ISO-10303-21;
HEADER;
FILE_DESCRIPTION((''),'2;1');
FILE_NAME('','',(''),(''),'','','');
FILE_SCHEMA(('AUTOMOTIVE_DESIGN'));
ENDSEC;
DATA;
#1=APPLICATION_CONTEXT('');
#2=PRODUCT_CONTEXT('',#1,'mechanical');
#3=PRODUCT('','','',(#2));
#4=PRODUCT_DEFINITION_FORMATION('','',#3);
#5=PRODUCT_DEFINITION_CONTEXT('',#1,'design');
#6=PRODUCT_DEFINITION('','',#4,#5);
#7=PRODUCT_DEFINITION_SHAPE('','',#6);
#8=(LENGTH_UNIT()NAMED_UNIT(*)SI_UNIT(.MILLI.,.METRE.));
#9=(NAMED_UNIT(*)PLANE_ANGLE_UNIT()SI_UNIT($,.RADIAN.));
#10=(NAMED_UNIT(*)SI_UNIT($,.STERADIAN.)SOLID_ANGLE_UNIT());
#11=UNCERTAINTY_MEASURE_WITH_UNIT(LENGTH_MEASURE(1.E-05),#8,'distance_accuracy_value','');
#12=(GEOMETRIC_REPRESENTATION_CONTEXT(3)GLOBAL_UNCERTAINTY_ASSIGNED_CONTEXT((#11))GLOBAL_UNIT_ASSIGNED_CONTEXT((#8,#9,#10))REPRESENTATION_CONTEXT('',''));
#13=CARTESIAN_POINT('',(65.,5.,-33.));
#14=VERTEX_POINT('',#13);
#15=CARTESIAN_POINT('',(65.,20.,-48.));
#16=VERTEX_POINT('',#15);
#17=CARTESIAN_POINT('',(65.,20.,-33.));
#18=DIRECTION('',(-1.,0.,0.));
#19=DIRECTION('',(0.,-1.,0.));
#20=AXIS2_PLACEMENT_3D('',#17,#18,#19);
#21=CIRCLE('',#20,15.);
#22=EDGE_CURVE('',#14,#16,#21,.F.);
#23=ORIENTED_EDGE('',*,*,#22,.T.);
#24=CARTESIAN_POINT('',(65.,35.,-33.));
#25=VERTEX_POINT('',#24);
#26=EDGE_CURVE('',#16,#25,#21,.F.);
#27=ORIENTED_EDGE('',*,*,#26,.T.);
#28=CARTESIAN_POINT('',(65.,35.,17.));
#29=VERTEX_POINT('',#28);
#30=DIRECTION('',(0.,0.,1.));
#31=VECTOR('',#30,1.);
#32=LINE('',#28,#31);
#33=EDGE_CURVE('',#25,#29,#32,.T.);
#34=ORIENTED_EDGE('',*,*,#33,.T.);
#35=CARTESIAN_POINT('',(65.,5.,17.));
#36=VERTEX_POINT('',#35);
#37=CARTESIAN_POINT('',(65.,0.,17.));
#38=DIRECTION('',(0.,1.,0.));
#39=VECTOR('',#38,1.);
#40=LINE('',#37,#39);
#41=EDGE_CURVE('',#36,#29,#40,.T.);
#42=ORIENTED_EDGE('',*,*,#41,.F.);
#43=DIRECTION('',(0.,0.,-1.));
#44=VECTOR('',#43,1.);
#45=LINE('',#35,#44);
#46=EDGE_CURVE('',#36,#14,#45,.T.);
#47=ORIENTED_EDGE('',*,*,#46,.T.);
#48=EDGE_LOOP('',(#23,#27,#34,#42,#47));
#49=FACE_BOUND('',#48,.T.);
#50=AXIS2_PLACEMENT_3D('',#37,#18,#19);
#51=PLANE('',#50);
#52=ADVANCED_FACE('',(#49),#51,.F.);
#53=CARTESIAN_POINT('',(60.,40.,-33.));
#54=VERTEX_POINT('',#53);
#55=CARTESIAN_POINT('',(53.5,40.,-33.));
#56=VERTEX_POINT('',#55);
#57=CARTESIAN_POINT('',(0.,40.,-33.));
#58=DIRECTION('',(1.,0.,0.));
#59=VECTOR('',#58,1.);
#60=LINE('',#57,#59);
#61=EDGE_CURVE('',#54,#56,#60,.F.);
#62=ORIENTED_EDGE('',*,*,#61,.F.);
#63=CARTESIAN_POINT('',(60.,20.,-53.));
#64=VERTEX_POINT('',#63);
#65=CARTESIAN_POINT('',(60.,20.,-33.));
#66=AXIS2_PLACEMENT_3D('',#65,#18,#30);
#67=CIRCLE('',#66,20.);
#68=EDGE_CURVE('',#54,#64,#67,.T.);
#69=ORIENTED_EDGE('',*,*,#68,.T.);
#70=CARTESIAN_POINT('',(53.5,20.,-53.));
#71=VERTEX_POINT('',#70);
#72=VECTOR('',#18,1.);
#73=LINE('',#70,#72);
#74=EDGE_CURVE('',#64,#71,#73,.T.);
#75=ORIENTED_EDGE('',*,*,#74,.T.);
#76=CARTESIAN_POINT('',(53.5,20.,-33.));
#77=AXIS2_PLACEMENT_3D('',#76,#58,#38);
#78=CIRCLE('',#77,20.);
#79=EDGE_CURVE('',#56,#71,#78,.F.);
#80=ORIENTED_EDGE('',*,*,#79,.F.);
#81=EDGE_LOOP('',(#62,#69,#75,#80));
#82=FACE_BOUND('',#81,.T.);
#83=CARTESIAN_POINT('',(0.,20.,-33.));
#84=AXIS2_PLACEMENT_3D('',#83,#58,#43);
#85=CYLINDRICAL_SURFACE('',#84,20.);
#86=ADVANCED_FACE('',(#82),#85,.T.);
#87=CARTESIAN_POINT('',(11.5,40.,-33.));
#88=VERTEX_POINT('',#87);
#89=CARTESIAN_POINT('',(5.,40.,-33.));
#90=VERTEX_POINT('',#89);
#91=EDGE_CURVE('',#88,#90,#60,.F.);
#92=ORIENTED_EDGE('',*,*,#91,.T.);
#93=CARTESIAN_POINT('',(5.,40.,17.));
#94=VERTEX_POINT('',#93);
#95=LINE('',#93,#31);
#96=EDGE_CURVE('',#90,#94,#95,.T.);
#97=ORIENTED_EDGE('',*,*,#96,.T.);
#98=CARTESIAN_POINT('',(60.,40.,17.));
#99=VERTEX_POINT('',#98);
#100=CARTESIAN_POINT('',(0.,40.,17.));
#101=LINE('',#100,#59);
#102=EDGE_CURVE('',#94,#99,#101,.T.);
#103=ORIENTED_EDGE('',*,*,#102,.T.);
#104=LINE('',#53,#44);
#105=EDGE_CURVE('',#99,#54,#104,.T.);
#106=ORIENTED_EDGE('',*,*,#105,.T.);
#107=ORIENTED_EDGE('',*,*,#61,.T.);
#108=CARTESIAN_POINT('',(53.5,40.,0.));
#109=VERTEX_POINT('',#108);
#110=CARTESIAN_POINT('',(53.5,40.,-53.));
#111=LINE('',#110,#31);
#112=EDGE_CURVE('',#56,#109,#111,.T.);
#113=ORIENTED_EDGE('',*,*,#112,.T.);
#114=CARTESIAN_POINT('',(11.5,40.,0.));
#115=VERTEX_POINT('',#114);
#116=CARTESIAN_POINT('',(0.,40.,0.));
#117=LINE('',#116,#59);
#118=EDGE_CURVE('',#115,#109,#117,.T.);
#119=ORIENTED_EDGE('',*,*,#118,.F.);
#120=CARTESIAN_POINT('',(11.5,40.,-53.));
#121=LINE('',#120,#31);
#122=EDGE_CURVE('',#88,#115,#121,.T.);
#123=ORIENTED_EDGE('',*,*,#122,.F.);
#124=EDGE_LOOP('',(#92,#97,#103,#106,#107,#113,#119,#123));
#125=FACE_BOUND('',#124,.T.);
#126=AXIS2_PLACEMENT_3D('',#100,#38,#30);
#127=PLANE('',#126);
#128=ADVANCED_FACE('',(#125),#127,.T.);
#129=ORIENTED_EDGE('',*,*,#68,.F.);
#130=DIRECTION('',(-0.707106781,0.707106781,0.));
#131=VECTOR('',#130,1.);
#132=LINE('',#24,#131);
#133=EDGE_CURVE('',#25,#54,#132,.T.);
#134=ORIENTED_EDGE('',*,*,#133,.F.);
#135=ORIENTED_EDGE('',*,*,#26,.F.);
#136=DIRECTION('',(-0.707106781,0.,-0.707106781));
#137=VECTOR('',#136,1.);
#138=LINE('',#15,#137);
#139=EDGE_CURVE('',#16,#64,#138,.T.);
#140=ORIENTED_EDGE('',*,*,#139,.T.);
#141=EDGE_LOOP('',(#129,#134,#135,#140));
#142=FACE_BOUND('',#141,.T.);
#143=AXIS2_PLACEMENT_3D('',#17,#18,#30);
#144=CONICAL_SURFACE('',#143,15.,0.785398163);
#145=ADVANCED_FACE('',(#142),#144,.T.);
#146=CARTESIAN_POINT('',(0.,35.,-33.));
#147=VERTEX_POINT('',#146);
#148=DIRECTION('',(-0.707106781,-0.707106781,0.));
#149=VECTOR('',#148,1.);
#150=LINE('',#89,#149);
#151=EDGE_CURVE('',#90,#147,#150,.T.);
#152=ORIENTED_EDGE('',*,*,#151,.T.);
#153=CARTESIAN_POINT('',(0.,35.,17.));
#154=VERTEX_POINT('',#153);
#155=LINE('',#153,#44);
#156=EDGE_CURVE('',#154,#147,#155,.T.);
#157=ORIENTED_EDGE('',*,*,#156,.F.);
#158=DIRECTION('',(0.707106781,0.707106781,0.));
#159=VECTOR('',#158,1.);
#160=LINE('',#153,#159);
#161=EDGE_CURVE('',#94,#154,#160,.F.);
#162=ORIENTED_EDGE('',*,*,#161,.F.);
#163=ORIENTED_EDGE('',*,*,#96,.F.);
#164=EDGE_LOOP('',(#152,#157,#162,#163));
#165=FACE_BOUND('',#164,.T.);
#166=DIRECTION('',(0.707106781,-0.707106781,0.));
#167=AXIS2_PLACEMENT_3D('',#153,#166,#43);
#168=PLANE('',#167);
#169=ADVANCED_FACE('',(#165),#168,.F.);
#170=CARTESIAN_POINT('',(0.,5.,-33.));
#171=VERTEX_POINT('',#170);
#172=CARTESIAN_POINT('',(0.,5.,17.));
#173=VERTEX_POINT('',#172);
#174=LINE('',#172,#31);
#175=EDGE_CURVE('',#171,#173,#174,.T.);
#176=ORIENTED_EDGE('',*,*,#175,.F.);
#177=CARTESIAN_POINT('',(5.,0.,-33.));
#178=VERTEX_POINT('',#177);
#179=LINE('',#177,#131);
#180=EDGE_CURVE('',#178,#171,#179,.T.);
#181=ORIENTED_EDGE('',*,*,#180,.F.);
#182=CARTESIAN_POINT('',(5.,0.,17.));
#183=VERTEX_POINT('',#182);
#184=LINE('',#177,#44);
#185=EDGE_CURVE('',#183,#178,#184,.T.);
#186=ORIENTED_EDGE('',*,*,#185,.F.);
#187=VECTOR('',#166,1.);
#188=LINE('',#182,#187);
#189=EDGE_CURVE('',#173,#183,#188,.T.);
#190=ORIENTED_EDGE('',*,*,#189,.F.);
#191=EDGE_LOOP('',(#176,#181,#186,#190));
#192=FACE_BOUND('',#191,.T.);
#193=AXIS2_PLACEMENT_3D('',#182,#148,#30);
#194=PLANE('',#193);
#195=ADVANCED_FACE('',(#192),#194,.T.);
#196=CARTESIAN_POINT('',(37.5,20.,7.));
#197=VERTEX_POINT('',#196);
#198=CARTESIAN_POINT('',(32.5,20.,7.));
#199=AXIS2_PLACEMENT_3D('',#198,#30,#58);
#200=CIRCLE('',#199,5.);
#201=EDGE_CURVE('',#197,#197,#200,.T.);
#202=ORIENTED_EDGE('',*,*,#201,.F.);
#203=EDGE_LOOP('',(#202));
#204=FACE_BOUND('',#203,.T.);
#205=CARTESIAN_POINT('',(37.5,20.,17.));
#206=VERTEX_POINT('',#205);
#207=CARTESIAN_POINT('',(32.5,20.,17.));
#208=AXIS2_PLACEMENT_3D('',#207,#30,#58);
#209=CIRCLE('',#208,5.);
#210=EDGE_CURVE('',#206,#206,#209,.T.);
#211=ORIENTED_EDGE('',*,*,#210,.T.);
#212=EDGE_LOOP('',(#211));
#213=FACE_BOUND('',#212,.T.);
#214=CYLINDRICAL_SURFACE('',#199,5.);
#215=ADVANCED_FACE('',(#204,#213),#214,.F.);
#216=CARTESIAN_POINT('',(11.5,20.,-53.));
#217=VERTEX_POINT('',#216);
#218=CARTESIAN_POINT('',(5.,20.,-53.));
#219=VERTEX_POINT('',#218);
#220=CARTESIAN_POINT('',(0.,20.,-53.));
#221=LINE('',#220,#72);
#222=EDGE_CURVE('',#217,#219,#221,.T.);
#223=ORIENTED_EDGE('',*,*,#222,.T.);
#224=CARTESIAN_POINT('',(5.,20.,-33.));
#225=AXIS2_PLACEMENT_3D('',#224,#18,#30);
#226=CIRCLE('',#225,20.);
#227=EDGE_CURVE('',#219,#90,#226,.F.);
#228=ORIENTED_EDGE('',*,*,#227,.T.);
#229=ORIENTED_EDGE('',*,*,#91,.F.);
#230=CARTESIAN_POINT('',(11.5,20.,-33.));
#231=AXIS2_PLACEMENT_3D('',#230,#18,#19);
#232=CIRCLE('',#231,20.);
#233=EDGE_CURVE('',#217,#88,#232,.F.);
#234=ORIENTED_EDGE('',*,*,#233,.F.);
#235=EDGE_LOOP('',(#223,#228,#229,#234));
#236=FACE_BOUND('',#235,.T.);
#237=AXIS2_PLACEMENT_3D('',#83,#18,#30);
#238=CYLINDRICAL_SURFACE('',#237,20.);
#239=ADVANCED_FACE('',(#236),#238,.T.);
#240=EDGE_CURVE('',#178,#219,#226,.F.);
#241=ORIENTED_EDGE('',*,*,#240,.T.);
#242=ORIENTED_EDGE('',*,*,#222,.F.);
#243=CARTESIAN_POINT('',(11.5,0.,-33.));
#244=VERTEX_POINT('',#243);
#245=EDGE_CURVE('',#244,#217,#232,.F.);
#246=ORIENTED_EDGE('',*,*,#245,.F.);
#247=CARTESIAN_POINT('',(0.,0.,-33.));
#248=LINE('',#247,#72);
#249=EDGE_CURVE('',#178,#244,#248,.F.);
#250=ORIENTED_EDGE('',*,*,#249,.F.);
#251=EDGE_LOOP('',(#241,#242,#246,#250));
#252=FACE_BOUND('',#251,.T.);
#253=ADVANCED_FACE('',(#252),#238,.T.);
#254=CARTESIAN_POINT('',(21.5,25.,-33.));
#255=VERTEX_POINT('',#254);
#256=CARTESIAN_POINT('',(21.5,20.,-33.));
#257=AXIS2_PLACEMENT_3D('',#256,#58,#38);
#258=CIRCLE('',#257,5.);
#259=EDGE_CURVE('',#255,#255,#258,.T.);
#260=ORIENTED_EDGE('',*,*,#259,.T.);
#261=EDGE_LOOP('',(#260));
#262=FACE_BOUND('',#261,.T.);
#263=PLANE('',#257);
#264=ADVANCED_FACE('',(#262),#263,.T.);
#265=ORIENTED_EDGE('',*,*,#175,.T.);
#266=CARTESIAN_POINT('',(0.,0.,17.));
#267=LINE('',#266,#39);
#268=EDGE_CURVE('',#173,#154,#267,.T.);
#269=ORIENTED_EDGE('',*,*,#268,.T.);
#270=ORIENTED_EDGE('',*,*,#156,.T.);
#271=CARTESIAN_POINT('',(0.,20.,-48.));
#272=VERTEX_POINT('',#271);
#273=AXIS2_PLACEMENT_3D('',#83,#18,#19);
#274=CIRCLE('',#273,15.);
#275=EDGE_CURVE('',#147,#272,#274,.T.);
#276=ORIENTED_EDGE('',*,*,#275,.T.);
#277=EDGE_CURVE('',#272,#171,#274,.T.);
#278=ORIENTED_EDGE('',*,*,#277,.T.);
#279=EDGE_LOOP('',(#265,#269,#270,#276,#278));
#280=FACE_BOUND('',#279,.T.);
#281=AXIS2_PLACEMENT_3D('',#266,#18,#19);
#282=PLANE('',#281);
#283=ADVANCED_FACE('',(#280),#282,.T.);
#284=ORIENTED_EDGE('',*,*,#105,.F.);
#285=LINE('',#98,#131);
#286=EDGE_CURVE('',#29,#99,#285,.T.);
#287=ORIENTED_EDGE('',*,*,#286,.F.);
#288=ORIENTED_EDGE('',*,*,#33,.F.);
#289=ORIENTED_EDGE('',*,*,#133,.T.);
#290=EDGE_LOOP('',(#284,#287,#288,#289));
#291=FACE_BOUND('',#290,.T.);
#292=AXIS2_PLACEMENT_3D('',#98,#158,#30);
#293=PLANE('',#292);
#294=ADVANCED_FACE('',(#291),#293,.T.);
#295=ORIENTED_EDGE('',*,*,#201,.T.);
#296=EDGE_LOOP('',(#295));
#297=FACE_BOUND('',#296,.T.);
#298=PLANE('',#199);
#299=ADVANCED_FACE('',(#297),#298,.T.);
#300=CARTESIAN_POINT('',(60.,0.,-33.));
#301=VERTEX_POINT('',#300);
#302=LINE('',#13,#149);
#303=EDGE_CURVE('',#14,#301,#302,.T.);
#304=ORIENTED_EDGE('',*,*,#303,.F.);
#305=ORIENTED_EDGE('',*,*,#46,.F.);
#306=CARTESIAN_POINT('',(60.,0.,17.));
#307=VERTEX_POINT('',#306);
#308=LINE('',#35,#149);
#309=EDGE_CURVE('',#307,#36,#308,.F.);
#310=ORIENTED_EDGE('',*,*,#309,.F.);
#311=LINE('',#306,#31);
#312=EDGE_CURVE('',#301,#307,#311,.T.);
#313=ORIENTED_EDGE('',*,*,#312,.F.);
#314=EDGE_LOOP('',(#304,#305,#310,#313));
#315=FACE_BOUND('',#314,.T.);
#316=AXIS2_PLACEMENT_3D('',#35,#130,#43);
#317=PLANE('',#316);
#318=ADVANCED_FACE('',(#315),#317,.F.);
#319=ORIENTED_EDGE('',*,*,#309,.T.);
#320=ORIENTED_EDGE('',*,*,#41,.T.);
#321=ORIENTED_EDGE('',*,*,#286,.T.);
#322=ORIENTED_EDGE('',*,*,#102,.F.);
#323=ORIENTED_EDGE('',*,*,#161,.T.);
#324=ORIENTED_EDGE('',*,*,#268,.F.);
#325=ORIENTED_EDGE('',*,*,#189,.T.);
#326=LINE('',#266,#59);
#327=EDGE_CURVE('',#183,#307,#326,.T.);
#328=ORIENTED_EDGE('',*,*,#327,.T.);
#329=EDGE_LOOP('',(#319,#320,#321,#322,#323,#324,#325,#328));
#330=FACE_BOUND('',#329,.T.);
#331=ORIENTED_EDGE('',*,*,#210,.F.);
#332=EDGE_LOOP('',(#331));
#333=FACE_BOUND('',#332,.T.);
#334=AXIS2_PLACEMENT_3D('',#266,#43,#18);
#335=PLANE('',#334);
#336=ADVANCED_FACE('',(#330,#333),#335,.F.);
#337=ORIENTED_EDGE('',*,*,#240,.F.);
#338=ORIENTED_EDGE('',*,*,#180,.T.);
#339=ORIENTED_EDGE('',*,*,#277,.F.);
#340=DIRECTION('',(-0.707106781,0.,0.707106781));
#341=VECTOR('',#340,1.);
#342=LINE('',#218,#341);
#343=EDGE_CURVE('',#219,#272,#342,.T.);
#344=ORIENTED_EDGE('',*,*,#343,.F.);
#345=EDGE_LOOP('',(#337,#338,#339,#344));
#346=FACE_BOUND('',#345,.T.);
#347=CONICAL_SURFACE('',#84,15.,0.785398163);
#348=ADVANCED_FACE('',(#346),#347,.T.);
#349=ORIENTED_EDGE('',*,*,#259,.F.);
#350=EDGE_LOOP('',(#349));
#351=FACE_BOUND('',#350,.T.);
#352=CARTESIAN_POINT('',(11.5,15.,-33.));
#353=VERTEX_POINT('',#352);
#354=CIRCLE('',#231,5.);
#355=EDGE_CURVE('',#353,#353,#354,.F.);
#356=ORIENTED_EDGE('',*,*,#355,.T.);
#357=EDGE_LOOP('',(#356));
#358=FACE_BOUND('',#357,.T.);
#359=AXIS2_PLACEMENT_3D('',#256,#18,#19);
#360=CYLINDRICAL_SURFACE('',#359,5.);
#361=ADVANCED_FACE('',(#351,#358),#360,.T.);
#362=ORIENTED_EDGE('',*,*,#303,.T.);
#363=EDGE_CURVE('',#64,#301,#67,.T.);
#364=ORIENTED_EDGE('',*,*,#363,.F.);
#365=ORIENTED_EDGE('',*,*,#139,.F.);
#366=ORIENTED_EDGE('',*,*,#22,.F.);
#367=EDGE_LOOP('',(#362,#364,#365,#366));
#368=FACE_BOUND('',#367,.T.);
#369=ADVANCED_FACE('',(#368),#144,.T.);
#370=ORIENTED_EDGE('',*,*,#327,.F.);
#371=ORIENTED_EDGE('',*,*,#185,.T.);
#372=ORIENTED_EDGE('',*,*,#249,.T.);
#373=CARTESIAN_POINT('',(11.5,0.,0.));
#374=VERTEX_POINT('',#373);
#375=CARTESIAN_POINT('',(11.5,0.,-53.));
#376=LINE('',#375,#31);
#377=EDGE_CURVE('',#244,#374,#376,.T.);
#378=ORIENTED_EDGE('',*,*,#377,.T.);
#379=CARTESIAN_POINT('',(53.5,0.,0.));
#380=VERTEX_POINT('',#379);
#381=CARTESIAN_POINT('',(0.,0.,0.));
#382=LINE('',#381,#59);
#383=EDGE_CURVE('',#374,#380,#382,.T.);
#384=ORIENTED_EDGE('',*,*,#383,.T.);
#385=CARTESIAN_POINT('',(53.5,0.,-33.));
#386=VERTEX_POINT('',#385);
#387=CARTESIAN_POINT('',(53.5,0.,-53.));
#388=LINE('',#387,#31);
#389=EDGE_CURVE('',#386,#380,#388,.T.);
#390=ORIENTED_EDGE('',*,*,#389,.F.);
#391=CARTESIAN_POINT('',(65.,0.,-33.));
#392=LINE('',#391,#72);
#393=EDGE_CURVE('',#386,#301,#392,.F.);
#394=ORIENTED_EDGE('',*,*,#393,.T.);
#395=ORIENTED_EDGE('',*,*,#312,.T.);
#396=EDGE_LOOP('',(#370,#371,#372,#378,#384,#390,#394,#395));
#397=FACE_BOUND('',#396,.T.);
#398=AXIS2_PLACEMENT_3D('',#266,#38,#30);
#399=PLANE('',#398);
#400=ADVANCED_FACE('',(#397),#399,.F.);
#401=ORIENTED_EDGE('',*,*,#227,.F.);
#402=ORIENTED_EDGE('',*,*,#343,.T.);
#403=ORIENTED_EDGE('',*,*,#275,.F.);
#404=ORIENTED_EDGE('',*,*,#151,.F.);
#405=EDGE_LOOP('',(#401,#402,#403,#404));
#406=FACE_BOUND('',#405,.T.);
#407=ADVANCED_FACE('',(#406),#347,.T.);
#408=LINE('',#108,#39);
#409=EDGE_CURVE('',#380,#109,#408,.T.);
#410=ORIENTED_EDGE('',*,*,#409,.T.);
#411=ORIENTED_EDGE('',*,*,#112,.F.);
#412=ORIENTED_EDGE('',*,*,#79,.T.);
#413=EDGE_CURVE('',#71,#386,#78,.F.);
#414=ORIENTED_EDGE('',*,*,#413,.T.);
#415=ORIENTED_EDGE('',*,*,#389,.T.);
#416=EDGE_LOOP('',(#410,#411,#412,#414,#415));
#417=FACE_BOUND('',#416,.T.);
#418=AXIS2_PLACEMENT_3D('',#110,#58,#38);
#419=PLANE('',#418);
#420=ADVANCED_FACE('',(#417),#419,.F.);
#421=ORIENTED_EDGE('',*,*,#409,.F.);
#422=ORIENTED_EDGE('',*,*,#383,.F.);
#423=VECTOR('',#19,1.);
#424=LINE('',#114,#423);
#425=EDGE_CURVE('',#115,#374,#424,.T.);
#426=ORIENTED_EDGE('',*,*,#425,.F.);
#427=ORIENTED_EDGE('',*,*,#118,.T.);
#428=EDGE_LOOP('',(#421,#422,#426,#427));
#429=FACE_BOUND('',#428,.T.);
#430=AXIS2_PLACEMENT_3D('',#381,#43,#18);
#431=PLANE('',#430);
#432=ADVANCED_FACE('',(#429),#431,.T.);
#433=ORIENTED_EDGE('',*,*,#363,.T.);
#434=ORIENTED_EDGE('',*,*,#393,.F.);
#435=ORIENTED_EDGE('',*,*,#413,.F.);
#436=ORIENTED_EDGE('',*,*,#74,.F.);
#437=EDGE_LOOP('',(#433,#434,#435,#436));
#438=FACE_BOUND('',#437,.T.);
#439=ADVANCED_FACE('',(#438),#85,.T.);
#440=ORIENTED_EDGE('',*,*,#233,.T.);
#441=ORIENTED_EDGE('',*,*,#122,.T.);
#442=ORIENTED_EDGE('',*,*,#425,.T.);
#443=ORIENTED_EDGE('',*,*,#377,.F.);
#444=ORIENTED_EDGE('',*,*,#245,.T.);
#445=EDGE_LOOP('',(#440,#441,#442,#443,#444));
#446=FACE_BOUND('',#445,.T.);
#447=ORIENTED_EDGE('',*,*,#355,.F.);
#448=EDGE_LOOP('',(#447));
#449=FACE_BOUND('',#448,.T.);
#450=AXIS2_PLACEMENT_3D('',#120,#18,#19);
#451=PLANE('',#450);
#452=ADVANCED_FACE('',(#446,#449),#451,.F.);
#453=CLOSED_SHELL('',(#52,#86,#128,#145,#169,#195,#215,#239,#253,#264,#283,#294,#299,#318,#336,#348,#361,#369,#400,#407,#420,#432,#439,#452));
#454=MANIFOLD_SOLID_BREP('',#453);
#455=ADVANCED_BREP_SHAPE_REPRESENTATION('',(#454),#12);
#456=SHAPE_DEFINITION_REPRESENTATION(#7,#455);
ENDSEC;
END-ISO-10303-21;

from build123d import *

# Parameters (mm, degrees)
SKETCH1_W           = 65
SKETCH1_H           = 40
BOSS_EXTRUDE1_DEPTH = 17
SKETCH2_W           = 11.5
SKETCH2_H           = 40
BOSS_EXTRUDE2_DEPTH = 53
FILLET1_R           = 20
CHAMFER1_SIZE       = 5
SKETCH3_R           = 5
CUT_EXTRUDE1_DEPTH  = 10
SKETCH4_R           = 5
BOSS_EXTRUDE3_DEPTH = 10


with BuildPart() as part:
    # Sketch1 → Boss-Extrude1 (new body)
    with BuildSketch(Plane.XY):
        with Locations((32.5, 20)):
            Rectangle(SKETCH1_W, SKETCH1_H)
    extrude(amount=BOSS_EXTRUDE1_DEPTH)

    # Sketch2 → Boss-Extrude2 (add)
    with BuildSketch(Plane(origin=(0, 0, 0), x_dir=(-1, 0, 0), z_dir=(0, 0, -1))):
        with Locations((-5.75, 20)):
            Rectangle(SKETCH2_W, SKETCH2_H)
        with Locations((-59.25, 20)):
            Rectangle(SKETCH2_W, SKETCH2_H)
    extrude(amount=BOSS_EXTRUDE2_DEPTH)

    # Fillet1
    fillet1_edges = [part.edges().sort_by_distance(p)[0] for p in [
        (59.25, 40, -53),
        (5.75, 40, -53),
        (59.25, 0, -53),
        (5.75, 0, -53),
    ]]
    fillet(fillet1_edges, radius=FILLET1_R - 0.0001)  # a hair under: the kernel refuses the full size

    # Chamfer1
    chamfer1_edges = [part.edges().sort_by_distance(p)[0] for p in [
        (65, 5.857835087, -47.142164913),
        (65, 34.142164913, -47.142164913),
        (0, 5.857835087, -47.142164913),
        (0, 34.142164913, -47.142164913),
        (0, 0, -8.00005),
        (65, 0, -8.00005),
        (65, 40, -8.00005),
        (0, 40, -8.00005),
    ]]
    chamfer(chamfer1_edges, length=CHAMFER1_SIZE)

    # Sketch3 → Cut-Extrude1 (cut)
    with BuildSketch(Plane.XY.offset(17)):
        with Locations((32.5, 20)):
            Circle(SKETCH3_R)
    extrude(amount=-CUT_EXTRUDE1_DEPTH, mode=Mode.SUBTRACT)

    # Sketch4 → Boss-Extrude3 (add)
    with BuildSketch(Plane(origin=(11.5, 0, 0), x_dir=(0, 0, -1), z_dir=(1, 0, 0))):
        with Locations(Location((33, 20, 0), (0, 0, 270))):
            Circle(SKETCH4_R)
    extrude(amount=BOSS_EXTRUDE3_DEPTH)


solid = part.part
